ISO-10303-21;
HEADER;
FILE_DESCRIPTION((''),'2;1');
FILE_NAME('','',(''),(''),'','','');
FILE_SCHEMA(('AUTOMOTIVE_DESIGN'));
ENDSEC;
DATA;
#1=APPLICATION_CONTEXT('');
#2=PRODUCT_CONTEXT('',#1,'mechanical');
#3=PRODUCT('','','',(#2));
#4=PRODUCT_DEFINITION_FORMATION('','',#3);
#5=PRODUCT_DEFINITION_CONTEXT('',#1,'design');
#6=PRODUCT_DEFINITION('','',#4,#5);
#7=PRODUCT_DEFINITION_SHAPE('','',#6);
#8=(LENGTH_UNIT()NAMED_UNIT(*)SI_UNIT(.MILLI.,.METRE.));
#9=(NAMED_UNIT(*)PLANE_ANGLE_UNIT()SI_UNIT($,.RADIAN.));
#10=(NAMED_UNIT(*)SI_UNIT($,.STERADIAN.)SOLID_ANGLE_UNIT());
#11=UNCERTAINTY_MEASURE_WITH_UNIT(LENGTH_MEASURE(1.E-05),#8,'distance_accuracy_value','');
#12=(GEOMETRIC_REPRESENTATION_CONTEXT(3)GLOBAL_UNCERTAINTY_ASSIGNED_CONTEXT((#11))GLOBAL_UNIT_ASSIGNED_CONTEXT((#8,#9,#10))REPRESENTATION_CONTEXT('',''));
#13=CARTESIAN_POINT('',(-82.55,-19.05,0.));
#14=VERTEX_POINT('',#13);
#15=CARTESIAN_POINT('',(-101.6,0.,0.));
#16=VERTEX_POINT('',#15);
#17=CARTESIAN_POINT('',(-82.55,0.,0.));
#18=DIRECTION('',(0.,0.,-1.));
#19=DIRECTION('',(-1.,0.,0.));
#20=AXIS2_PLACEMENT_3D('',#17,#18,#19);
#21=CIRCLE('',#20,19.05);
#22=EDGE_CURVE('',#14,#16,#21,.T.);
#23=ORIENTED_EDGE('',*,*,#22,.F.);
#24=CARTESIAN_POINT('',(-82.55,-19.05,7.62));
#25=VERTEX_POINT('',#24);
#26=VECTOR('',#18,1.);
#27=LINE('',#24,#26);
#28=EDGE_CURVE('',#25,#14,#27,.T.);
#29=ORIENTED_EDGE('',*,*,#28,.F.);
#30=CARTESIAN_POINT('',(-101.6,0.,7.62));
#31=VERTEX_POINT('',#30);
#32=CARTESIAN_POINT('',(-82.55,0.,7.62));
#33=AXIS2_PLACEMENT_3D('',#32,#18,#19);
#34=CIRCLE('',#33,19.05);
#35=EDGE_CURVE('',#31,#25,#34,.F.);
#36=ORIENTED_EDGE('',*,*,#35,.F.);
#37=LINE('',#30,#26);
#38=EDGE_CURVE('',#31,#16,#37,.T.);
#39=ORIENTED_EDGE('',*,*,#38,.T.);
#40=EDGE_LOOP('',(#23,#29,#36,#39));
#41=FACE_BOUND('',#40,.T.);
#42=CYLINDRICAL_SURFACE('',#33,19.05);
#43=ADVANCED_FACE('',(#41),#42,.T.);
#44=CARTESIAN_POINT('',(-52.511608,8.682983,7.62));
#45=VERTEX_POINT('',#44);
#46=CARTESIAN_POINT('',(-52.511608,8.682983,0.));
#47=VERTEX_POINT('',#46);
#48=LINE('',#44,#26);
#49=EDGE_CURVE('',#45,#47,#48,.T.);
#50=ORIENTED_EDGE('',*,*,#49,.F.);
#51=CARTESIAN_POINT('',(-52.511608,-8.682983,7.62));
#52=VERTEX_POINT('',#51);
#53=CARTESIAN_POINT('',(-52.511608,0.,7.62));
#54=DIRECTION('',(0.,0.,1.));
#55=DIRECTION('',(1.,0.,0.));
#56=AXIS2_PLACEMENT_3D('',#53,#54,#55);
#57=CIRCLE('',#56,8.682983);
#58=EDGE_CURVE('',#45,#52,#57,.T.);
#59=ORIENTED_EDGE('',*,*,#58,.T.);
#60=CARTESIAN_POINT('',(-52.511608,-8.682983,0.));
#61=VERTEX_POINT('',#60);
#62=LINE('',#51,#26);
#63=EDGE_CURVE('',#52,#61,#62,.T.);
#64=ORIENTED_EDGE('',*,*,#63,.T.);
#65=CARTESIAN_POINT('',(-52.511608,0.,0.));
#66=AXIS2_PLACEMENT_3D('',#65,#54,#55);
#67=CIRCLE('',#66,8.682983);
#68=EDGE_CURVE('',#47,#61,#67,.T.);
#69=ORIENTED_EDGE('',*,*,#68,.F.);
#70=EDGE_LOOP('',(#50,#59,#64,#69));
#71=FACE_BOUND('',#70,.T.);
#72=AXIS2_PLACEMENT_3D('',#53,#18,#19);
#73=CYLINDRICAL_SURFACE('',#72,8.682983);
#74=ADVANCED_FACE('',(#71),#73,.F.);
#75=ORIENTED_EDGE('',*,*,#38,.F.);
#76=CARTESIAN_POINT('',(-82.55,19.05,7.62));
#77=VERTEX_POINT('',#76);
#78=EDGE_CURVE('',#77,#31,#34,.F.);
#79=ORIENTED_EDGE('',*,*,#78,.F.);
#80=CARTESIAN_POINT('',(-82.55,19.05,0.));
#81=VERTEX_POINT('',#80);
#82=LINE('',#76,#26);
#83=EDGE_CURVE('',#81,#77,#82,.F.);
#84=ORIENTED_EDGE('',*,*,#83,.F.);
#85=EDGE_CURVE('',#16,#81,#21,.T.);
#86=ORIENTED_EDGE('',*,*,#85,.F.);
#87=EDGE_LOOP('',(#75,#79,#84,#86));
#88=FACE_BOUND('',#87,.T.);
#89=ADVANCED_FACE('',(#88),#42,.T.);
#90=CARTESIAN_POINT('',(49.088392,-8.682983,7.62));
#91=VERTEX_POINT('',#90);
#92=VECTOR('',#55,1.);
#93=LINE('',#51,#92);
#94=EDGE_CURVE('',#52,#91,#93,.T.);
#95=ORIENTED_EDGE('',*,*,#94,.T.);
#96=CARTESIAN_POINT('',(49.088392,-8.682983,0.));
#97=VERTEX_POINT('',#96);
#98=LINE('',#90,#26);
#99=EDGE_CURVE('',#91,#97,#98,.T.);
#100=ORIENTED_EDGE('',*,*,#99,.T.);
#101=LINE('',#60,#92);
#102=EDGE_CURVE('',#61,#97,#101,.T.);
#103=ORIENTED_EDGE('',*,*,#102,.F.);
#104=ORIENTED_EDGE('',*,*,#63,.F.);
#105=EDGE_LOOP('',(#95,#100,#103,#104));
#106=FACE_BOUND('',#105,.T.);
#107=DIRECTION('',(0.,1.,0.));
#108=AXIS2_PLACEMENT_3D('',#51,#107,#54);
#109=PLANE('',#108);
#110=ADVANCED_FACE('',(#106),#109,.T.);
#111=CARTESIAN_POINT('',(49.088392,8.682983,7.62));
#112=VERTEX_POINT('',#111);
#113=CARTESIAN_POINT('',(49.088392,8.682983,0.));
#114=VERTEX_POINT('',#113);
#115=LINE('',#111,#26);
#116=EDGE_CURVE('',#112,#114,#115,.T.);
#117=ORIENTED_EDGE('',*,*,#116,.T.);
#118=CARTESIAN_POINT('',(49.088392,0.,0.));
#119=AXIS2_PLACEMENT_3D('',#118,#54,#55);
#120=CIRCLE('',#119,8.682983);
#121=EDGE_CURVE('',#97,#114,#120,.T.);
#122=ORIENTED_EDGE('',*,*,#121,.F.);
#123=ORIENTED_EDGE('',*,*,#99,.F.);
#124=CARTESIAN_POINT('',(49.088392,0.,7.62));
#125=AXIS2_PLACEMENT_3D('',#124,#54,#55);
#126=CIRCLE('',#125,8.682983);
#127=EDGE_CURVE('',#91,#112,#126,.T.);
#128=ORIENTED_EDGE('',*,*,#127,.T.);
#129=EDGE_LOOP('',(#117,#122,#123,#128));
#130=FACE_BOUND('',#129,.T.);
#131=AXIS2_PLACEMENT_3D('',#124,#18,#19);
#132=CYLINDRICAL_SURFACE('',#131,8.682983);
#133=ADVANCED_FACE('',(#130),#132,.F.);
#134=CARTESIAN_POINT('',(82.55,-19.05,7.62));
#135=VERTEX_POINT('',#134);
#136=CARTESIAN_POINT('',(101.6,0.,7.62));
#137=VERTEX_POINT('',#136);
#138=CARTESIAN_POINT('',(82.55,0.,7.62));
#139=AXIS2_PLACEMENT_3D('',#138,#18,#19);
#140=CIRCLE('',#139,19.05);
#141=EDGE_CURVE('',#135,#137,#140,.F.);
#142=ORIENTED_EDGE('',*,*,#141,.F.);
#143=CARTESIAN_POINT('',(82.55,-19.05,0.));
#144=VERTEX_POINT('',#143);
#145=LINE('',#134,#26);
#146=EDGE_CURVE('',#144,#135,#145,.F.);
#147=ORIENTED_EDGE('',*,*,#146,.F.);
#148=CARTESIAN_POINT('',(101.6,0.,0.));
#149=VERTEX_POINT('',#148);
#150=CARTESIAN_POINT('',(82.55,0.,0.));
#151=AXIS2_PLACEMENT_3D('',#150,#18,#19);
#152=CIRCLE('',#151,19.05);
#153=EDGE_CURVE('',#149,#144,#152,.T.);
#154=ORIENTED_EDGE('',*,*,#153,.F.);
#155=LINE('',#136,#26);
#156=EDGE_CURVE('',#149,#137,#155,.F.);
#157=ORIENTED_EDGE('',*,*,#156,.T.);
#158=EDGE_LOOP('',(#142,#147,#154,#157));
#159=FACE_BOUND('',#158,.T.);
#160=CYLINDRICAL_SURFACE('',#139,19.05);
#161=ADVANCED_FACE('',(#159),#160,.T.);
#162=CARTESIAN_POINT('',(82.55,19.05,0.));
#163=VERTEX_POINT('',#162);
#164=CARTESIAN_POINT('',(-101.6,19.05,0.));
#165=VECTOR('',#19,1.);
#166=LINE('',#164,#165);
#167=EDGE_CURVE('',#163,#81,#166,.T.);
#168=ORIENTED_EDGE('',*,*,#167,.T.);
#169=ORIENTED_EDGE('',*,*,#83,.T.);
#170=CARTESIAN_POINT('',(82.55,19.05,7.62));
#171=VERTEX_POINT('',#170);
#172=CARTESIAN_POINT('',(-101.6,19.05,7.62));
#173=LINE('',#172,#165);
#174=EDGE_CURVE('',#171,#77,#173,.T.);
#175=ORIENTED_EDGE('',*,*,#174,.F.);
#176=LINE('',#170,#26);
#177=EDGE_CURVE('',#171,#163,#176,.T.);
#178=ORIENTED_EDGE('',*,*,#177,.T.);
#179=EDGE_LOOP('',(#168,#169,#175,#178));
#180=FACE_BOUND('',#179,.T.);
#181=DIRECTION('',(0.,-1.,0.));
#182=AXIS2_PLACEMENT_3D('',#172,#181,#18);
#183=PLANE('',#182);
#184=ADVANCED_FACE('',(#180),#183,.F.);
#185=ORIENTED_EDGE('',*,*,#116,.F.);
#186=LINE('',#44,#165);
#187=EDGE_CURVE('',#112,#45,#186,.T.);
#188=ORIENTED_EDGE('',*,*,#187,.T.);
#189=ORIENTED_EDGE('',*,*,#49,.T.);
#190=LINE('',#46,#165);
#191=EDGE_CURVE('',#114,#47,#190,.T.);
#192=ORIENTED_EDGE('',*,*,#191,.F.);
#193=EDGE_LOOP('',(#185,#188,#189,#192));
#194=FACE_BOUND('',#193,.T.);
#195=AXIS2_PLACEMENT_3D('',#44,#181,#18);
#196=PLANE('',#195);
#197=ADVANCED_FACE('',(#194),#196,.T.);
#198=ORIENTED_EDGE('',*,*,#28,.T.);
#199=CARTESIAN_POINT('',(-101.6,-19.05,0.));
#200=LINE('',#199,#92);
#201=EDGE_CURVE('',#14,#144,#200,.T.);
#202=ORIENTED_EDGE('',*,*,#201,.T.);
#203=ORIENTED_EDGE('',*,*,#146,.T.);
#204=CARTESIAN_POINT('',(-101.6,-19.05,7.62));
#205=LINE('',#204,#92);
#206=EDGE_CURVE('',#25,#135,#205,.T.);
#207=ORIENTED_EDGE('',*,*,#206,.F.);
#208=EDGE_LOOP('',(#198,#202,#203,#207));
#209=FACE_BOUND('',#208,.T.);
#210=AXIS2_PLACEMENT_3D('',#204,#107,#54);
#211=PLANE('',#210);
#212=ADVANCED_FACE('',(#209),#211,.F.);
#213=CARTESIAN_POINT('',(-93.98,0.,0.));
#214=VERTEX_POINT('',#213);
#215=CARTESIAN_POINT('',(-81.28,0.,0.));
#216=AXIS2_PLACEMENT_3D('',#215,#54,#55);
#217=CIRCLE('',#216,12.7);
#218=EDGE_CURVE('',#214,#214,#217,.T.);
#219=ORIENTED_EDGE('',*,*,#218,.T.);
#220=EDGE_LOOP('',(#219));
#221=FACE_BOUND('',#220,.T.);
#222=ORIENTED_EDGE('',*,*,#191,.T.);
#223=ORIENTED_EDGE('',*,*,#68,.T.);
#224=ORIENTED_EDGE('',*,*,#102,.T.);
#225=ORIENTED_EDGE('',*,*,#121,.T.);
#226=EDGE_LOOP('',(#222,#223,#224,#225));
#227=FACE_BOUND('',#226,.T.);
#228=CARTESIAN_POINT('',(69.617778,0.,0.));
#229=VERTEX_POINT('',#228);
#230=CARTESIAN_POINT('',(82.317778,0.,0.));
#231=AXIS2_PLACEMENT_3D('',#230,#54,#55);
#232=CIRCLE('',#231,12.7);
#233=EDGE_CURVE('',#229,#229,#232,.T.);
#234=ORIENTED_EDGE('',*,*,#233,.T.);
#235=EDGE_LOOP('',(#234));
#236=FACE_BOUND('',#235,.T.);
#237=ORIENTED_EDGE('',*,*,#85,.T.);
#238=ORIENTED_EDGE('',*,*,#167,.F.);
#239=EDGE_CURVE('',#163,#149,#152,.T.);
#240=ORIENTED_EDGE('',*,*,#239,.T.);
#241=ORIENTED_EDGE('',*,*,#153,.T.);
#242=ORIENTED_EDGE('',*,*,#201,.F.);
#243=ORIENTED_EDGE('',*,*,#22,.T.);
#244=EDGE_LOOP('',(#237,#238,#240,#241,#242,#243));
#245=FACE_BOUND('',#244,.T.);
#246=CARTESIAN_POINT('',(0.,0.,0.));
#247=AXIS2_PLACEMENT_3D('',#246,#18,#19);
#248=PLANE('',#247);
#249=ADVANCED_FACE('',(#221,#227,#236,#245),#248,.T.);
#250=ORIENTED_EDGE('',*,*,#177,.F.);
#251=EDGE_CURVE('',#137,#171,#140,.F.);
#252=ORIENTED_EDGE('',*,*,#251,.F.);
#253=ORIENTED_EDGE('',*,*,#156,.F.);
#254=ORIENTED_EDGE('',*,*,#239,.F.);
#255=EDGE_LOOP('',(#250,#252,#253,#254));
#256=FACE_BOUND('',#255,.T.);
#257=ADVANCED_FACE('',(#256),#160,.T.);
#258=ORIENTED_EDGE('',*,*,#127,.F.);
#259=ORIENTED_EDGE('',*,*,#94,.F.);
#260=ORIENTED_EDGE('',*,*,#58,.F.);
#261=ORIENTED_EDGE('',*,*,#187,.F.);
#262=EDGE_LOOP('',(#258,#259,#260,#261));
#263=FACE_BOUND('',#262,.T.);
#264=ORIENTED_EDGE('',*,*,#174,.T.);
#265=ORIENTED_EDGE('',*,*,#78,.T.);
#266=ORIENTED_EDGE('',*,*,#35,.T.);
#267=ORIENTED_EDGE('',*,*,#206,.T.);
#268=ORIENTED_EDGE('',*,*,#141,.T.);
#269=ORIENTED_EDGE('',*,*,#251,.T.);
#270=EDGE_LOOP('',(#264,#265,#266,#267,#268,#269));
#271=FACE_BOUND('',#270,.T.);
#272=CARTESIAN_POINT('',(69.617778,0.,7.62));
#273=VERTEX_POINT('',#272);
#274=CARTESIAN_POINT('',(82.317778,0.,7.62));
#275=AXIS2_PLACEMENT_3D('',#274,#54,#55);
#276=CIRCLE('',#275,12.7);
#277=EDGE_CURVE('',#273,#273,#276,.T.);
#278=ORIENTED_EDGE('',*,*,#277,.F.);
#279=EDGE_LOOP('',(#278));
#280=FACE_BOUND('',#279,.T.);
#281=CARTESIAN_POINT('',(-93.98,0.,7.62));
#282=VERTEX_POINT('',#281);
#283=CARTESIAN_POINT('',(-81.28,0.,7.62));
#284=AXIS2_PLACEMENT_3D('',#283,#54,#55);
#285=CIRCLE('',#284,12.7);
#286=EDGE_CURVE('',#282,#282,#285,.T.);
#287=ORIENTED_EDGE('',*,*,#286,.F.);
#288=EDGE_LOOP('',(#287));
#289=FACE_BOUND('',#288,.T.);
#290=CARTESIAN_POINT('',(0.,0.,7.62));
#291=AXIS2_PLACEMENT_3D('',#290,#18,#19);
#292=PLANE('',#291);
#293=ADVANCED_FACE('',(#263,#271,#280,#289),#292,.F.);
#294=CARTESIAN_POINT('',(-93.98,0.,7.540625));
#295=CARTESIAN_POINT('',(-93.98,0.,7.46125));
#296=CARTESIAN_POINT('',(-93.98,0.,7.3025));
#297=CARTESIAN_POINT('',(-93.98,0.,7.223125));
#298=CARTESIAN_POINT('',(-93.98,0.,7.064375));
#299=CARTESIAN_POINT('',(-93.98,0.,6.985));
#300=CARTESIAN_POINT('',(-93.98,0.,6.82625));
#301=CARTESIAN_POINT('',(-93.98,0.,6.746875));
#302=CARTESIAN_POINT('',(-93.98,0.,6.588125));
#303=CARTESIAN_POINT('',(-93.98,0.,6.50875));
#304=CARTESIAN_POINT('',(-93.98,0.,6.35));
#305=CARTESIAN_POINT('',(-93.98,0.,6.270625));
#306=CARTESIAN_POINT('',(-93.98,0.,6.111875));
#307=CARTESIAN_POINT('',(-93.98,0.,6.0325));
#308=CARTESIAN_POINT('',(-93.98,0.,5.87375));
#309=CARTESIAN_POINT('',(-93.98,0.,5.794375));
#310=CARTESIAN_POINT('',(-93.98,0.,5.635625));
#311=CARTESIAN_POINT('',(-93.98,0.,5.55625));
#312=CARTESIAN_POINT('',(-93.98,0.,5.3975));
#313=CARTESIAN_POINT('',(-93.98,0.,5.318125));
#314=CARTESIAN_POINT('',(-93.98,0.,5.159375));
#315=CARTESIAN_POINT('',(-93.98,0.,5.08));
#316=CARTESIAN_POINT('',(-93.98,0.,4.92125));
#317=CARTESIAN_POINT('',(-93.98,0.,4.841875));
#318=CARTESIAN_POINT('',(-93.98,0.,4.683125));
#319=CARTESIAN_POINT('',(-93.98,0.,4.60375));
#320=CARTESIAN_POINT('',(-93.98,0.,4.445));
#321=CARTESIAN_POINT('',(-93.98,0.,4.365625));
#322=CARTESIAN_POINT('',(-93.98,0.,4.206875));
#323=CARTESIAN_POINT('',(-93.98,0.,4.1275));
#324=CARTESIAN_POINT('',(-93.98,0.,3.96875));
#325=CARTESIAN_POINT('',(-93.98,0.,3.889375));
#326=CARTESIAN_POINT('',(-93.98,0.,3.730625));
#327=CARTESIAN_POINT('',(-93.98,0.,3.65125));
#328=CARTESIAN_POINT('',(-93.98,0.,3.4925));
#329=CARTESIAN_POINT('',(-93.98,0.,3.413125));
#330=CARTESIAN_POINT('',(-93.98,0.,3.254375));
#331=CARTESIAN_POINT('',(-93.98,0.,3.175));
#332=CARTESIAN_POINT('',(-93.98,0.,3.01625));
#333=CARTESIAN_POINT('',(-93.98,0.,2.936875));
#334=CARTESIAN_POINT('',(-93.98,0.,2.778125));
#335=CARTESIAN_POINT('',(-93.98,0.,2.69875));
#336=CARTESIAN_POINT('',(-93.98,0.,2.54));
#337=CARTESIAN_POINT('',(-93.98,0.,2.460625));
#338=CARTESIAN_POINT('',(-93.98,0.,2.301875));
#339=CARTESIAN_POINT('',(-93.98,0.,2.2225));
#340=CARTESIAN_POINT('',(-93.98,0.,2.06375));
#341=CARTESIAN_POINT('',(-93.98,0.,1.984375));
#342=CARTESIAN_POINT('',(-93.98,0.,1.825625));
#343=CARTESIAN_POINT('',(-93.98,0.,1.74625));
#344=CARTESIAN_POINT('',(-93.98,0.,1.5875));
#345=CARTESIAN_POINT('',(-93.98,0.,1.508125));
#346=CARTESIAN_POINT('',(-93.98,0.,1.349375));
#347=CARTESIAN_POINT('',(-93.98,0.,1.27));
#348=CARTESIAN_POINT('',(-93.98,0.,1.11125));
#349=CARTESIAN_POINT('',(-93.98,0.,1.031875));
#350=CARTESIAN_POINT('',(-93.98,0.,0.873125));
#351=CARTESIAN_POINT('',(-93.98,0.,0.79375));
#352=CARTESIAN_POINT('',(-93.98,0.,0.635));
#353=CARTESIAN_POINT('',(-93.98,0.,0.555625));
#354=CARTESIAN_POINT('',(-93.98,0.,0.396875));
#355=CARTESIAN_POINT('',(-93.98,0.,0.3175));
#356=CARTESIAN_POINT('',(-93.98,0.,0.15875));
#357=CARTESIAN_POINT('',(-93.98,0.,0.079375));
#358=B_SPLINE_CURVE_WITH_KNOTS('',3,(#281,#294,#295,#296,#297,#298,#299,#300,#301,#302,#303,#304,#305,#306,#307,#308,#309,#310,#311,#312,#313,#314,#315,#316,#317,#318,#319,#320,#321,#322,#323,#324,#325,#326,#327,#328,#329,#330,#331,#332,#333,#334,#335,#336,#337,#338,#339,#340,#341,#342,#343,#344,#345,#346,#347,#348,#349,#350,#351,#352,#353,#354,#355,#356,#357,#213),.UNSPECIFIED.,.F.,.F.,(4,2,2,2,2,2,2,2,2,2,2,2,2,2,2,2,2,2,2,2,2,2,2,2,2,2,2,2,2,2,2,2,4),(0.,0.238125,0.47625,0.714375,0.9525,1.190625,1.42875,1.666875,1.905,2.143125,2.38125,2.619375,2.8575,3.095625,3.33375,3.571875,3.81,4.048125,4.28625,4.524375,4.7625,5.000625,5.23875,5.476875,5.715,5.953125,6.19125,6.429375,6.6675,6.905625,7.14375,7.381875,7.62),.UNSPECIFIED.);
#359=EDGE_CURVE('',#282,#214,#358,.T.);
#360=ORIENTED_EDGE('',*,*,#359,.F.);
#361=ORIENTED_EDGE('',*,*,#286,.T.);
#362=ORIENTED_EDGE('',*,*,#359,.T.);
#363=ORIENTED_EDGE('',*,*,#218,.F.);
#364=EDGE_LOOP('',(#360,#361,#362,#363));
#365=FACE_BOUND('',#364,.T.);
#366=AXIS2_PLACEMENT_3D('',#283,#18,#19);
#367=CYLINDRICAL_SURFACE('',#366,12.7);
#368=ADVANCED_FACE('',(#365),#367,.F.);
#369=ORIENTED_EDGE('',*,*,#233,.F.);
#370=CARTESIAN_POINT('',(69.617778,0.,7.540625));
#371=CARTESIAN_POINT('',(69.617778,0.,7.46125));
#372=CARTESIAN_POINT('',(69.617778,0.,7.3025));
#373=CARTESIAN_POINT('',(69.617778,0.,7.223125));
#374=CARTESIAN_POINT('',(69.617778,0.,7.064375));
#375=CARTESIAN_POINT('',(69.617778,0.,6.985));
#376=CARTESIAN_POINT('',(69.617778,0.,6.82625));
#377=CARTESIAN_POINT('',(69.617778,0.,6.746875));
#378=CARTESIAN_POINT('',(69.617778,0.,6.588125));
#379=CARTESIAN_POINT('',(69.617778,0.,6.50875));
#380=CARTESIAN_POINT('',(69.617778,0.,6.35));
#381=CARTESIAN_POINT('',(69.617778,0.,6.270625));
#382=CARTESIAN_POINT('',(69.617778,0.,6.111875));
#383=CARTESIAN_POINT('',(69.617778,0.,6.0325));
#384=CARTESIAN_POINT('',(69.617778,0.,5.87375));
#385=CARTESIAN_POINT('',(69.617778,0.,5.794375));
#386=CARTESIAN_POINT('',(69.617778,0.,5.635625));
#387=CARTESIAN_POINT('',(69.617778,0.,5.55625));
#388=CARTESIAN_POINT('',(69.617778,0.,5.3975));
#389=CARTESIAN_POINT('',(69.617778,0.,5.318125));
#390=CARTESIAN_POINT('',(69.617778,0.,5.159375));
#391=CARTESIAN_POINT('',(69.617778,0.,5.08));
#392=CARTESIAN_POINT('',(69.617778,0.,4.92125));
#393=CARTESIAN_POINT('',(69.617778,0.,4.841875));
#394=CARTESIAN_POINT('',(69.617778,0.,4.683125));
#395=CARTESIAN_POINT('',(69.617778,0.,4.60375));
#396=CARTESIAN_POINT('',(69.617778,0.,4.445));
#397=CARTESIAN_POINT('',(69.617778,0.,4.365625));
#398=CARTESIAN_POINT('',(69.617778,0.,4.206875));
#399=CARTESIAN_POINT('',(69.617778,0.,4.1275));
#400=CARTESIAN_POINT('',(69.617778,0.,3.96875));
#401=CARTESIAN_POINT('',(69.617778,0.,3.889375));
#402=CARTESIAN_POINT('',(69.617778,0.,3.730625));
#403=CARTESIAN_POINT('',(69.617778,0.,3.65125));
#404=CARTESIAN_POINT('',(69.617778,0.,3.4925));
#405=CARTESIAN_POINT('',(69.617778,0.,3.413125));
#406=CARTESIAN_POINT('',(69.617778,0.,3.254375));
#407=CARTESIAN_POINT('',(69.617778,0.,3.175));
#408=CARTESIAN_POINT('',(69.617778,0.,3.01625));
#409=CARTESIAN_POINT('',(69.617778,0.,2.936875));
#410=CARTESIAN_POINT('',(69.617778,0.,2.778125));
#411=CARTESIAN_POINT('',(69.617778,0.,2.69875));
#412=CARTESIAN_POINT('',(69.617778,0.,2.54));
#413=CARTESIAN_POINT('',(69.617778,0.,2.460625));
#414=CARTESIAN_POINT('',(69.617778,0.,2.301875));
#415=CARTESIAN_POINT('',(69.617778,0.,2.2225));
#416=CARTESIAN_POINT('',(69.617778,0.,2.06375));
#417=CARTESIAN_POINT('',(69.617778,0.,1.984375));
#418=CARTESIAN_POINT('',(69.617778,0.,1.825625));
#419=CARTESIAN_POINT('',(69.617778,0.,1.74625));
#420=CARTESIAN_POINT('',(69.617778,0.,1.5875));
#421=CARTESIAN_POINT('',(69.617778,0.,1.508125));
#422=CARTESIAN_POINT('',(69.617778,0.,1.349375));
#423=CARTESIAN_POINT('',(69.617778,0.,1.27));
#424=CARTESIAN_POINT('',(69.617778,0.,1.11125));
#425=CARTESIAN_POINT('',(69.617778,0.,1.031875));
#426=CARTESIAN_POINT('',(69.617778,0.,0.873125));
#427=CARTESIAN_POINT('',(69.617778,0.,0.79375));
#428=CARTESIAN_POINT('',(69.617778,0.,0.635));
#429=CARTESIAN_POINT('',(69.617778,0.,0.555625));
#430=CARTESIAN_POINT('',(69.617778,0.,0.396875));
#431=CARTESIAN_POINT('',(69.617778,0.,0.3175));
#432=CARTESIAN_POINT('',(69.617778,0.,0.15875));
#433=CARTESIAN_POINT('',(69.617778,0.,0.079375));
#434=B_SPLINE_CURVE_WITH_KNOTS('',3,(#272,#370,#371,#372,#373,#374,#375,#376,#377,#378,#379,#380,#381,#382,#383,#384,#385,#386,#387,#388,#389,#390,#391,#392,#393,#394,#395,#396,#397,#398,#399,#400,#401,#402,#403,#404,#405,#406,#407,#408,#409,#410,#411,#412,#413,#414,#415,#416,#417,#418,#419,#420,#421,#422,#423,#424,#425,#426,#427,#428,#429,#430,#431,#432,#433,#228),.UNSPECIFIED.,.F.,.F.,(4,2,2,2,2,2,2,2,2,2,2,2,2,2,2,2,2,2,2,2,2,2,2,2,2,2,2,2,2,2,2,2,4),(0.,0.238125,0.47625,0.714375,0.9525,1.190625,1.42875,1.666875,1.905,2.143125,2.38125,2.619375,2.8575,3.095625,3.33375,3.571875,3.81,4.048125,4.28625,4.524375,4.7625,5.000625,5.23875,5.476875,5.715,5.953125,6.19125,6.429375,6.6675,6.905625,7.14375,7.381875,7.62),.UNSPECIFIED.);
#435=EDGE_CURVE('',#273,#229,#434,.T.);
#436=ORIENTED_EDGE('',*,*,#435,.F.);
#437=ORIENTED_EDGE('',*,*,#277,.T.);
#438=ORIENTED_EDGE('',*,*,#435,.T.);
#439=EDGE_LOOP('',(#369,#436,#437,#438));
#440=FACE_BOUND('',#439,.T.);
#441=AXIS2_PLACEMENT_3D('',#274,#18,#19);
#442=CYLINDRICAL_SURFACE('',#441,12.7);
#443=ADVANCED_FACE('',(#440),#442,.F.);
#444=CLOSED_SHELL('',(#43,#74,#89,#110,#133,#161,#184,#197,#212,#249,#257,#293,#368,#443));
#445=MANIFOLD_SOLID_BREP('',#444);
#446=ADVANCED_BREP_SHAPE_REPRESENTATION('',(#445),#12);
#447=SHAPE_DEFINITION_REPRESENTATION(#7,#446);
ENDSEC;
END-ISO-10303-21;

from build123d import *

# Parameters (mm, degrees)
SKETCH1_W           = 203.2
SKETCH1_H           = 38.1
SKETCH1_R           = 12.7
BOSS_EXTRUDE1_DEPTH = 7.62
FILLET1_R           = 19.05


with BuildPart() as part:
    # Sketch1 → Boss-Extrude1 (new body)
    with BuildSketch(Plane.XY):
        Rectangle(SKETCH1_W, SKETCH1_H)
        with Locations(Location((-81.28, 0, 0), (0, 0, 180))):
            Circle(SKETCH1_R, mode=Mode.SUBTRACT)
        with Locations(Location((82.317778023, 0, 0), (0, 0, 180))):
            Circle(SKETCH1_R, mode=Mode.SUBTRACT)
        with BuildLine():
            Line((-52.511607643, 8.682983434), (49.088392357, 8.682983434))
            ThreePointArc((49.088392357, 8.682983434), (57.771375791, 0), (49.088392357, -8.682983434))
            Line((49.088392357, -8.682983434), (-52.511607643, -8.682983434))
            ThreePointArc((-52.511607643, -8.682983434), (-61.194591077, 0), (-52.511607643, 8.682983434))
        make_face(mode=Mode.SUBTRACT)
    extrude(amount=BOSS_EXTRUDE1_DEPTH)

    # Fillet1
    fillet1_edges = [part.edges().sort_by_distance(p)[0] for p in [
        (101.6, -19.05, 3.81),
        (101.6, 19.05, 3.81),
        (-101.6, -19.05, 3.81),
        (-101.6, 19.05, 3.81),
    ]]
    fillet(fillet1_edges, radius=FILLET1_R - 0.0001)  # a hair under: the kernel refuses the full size


solid = part.part
